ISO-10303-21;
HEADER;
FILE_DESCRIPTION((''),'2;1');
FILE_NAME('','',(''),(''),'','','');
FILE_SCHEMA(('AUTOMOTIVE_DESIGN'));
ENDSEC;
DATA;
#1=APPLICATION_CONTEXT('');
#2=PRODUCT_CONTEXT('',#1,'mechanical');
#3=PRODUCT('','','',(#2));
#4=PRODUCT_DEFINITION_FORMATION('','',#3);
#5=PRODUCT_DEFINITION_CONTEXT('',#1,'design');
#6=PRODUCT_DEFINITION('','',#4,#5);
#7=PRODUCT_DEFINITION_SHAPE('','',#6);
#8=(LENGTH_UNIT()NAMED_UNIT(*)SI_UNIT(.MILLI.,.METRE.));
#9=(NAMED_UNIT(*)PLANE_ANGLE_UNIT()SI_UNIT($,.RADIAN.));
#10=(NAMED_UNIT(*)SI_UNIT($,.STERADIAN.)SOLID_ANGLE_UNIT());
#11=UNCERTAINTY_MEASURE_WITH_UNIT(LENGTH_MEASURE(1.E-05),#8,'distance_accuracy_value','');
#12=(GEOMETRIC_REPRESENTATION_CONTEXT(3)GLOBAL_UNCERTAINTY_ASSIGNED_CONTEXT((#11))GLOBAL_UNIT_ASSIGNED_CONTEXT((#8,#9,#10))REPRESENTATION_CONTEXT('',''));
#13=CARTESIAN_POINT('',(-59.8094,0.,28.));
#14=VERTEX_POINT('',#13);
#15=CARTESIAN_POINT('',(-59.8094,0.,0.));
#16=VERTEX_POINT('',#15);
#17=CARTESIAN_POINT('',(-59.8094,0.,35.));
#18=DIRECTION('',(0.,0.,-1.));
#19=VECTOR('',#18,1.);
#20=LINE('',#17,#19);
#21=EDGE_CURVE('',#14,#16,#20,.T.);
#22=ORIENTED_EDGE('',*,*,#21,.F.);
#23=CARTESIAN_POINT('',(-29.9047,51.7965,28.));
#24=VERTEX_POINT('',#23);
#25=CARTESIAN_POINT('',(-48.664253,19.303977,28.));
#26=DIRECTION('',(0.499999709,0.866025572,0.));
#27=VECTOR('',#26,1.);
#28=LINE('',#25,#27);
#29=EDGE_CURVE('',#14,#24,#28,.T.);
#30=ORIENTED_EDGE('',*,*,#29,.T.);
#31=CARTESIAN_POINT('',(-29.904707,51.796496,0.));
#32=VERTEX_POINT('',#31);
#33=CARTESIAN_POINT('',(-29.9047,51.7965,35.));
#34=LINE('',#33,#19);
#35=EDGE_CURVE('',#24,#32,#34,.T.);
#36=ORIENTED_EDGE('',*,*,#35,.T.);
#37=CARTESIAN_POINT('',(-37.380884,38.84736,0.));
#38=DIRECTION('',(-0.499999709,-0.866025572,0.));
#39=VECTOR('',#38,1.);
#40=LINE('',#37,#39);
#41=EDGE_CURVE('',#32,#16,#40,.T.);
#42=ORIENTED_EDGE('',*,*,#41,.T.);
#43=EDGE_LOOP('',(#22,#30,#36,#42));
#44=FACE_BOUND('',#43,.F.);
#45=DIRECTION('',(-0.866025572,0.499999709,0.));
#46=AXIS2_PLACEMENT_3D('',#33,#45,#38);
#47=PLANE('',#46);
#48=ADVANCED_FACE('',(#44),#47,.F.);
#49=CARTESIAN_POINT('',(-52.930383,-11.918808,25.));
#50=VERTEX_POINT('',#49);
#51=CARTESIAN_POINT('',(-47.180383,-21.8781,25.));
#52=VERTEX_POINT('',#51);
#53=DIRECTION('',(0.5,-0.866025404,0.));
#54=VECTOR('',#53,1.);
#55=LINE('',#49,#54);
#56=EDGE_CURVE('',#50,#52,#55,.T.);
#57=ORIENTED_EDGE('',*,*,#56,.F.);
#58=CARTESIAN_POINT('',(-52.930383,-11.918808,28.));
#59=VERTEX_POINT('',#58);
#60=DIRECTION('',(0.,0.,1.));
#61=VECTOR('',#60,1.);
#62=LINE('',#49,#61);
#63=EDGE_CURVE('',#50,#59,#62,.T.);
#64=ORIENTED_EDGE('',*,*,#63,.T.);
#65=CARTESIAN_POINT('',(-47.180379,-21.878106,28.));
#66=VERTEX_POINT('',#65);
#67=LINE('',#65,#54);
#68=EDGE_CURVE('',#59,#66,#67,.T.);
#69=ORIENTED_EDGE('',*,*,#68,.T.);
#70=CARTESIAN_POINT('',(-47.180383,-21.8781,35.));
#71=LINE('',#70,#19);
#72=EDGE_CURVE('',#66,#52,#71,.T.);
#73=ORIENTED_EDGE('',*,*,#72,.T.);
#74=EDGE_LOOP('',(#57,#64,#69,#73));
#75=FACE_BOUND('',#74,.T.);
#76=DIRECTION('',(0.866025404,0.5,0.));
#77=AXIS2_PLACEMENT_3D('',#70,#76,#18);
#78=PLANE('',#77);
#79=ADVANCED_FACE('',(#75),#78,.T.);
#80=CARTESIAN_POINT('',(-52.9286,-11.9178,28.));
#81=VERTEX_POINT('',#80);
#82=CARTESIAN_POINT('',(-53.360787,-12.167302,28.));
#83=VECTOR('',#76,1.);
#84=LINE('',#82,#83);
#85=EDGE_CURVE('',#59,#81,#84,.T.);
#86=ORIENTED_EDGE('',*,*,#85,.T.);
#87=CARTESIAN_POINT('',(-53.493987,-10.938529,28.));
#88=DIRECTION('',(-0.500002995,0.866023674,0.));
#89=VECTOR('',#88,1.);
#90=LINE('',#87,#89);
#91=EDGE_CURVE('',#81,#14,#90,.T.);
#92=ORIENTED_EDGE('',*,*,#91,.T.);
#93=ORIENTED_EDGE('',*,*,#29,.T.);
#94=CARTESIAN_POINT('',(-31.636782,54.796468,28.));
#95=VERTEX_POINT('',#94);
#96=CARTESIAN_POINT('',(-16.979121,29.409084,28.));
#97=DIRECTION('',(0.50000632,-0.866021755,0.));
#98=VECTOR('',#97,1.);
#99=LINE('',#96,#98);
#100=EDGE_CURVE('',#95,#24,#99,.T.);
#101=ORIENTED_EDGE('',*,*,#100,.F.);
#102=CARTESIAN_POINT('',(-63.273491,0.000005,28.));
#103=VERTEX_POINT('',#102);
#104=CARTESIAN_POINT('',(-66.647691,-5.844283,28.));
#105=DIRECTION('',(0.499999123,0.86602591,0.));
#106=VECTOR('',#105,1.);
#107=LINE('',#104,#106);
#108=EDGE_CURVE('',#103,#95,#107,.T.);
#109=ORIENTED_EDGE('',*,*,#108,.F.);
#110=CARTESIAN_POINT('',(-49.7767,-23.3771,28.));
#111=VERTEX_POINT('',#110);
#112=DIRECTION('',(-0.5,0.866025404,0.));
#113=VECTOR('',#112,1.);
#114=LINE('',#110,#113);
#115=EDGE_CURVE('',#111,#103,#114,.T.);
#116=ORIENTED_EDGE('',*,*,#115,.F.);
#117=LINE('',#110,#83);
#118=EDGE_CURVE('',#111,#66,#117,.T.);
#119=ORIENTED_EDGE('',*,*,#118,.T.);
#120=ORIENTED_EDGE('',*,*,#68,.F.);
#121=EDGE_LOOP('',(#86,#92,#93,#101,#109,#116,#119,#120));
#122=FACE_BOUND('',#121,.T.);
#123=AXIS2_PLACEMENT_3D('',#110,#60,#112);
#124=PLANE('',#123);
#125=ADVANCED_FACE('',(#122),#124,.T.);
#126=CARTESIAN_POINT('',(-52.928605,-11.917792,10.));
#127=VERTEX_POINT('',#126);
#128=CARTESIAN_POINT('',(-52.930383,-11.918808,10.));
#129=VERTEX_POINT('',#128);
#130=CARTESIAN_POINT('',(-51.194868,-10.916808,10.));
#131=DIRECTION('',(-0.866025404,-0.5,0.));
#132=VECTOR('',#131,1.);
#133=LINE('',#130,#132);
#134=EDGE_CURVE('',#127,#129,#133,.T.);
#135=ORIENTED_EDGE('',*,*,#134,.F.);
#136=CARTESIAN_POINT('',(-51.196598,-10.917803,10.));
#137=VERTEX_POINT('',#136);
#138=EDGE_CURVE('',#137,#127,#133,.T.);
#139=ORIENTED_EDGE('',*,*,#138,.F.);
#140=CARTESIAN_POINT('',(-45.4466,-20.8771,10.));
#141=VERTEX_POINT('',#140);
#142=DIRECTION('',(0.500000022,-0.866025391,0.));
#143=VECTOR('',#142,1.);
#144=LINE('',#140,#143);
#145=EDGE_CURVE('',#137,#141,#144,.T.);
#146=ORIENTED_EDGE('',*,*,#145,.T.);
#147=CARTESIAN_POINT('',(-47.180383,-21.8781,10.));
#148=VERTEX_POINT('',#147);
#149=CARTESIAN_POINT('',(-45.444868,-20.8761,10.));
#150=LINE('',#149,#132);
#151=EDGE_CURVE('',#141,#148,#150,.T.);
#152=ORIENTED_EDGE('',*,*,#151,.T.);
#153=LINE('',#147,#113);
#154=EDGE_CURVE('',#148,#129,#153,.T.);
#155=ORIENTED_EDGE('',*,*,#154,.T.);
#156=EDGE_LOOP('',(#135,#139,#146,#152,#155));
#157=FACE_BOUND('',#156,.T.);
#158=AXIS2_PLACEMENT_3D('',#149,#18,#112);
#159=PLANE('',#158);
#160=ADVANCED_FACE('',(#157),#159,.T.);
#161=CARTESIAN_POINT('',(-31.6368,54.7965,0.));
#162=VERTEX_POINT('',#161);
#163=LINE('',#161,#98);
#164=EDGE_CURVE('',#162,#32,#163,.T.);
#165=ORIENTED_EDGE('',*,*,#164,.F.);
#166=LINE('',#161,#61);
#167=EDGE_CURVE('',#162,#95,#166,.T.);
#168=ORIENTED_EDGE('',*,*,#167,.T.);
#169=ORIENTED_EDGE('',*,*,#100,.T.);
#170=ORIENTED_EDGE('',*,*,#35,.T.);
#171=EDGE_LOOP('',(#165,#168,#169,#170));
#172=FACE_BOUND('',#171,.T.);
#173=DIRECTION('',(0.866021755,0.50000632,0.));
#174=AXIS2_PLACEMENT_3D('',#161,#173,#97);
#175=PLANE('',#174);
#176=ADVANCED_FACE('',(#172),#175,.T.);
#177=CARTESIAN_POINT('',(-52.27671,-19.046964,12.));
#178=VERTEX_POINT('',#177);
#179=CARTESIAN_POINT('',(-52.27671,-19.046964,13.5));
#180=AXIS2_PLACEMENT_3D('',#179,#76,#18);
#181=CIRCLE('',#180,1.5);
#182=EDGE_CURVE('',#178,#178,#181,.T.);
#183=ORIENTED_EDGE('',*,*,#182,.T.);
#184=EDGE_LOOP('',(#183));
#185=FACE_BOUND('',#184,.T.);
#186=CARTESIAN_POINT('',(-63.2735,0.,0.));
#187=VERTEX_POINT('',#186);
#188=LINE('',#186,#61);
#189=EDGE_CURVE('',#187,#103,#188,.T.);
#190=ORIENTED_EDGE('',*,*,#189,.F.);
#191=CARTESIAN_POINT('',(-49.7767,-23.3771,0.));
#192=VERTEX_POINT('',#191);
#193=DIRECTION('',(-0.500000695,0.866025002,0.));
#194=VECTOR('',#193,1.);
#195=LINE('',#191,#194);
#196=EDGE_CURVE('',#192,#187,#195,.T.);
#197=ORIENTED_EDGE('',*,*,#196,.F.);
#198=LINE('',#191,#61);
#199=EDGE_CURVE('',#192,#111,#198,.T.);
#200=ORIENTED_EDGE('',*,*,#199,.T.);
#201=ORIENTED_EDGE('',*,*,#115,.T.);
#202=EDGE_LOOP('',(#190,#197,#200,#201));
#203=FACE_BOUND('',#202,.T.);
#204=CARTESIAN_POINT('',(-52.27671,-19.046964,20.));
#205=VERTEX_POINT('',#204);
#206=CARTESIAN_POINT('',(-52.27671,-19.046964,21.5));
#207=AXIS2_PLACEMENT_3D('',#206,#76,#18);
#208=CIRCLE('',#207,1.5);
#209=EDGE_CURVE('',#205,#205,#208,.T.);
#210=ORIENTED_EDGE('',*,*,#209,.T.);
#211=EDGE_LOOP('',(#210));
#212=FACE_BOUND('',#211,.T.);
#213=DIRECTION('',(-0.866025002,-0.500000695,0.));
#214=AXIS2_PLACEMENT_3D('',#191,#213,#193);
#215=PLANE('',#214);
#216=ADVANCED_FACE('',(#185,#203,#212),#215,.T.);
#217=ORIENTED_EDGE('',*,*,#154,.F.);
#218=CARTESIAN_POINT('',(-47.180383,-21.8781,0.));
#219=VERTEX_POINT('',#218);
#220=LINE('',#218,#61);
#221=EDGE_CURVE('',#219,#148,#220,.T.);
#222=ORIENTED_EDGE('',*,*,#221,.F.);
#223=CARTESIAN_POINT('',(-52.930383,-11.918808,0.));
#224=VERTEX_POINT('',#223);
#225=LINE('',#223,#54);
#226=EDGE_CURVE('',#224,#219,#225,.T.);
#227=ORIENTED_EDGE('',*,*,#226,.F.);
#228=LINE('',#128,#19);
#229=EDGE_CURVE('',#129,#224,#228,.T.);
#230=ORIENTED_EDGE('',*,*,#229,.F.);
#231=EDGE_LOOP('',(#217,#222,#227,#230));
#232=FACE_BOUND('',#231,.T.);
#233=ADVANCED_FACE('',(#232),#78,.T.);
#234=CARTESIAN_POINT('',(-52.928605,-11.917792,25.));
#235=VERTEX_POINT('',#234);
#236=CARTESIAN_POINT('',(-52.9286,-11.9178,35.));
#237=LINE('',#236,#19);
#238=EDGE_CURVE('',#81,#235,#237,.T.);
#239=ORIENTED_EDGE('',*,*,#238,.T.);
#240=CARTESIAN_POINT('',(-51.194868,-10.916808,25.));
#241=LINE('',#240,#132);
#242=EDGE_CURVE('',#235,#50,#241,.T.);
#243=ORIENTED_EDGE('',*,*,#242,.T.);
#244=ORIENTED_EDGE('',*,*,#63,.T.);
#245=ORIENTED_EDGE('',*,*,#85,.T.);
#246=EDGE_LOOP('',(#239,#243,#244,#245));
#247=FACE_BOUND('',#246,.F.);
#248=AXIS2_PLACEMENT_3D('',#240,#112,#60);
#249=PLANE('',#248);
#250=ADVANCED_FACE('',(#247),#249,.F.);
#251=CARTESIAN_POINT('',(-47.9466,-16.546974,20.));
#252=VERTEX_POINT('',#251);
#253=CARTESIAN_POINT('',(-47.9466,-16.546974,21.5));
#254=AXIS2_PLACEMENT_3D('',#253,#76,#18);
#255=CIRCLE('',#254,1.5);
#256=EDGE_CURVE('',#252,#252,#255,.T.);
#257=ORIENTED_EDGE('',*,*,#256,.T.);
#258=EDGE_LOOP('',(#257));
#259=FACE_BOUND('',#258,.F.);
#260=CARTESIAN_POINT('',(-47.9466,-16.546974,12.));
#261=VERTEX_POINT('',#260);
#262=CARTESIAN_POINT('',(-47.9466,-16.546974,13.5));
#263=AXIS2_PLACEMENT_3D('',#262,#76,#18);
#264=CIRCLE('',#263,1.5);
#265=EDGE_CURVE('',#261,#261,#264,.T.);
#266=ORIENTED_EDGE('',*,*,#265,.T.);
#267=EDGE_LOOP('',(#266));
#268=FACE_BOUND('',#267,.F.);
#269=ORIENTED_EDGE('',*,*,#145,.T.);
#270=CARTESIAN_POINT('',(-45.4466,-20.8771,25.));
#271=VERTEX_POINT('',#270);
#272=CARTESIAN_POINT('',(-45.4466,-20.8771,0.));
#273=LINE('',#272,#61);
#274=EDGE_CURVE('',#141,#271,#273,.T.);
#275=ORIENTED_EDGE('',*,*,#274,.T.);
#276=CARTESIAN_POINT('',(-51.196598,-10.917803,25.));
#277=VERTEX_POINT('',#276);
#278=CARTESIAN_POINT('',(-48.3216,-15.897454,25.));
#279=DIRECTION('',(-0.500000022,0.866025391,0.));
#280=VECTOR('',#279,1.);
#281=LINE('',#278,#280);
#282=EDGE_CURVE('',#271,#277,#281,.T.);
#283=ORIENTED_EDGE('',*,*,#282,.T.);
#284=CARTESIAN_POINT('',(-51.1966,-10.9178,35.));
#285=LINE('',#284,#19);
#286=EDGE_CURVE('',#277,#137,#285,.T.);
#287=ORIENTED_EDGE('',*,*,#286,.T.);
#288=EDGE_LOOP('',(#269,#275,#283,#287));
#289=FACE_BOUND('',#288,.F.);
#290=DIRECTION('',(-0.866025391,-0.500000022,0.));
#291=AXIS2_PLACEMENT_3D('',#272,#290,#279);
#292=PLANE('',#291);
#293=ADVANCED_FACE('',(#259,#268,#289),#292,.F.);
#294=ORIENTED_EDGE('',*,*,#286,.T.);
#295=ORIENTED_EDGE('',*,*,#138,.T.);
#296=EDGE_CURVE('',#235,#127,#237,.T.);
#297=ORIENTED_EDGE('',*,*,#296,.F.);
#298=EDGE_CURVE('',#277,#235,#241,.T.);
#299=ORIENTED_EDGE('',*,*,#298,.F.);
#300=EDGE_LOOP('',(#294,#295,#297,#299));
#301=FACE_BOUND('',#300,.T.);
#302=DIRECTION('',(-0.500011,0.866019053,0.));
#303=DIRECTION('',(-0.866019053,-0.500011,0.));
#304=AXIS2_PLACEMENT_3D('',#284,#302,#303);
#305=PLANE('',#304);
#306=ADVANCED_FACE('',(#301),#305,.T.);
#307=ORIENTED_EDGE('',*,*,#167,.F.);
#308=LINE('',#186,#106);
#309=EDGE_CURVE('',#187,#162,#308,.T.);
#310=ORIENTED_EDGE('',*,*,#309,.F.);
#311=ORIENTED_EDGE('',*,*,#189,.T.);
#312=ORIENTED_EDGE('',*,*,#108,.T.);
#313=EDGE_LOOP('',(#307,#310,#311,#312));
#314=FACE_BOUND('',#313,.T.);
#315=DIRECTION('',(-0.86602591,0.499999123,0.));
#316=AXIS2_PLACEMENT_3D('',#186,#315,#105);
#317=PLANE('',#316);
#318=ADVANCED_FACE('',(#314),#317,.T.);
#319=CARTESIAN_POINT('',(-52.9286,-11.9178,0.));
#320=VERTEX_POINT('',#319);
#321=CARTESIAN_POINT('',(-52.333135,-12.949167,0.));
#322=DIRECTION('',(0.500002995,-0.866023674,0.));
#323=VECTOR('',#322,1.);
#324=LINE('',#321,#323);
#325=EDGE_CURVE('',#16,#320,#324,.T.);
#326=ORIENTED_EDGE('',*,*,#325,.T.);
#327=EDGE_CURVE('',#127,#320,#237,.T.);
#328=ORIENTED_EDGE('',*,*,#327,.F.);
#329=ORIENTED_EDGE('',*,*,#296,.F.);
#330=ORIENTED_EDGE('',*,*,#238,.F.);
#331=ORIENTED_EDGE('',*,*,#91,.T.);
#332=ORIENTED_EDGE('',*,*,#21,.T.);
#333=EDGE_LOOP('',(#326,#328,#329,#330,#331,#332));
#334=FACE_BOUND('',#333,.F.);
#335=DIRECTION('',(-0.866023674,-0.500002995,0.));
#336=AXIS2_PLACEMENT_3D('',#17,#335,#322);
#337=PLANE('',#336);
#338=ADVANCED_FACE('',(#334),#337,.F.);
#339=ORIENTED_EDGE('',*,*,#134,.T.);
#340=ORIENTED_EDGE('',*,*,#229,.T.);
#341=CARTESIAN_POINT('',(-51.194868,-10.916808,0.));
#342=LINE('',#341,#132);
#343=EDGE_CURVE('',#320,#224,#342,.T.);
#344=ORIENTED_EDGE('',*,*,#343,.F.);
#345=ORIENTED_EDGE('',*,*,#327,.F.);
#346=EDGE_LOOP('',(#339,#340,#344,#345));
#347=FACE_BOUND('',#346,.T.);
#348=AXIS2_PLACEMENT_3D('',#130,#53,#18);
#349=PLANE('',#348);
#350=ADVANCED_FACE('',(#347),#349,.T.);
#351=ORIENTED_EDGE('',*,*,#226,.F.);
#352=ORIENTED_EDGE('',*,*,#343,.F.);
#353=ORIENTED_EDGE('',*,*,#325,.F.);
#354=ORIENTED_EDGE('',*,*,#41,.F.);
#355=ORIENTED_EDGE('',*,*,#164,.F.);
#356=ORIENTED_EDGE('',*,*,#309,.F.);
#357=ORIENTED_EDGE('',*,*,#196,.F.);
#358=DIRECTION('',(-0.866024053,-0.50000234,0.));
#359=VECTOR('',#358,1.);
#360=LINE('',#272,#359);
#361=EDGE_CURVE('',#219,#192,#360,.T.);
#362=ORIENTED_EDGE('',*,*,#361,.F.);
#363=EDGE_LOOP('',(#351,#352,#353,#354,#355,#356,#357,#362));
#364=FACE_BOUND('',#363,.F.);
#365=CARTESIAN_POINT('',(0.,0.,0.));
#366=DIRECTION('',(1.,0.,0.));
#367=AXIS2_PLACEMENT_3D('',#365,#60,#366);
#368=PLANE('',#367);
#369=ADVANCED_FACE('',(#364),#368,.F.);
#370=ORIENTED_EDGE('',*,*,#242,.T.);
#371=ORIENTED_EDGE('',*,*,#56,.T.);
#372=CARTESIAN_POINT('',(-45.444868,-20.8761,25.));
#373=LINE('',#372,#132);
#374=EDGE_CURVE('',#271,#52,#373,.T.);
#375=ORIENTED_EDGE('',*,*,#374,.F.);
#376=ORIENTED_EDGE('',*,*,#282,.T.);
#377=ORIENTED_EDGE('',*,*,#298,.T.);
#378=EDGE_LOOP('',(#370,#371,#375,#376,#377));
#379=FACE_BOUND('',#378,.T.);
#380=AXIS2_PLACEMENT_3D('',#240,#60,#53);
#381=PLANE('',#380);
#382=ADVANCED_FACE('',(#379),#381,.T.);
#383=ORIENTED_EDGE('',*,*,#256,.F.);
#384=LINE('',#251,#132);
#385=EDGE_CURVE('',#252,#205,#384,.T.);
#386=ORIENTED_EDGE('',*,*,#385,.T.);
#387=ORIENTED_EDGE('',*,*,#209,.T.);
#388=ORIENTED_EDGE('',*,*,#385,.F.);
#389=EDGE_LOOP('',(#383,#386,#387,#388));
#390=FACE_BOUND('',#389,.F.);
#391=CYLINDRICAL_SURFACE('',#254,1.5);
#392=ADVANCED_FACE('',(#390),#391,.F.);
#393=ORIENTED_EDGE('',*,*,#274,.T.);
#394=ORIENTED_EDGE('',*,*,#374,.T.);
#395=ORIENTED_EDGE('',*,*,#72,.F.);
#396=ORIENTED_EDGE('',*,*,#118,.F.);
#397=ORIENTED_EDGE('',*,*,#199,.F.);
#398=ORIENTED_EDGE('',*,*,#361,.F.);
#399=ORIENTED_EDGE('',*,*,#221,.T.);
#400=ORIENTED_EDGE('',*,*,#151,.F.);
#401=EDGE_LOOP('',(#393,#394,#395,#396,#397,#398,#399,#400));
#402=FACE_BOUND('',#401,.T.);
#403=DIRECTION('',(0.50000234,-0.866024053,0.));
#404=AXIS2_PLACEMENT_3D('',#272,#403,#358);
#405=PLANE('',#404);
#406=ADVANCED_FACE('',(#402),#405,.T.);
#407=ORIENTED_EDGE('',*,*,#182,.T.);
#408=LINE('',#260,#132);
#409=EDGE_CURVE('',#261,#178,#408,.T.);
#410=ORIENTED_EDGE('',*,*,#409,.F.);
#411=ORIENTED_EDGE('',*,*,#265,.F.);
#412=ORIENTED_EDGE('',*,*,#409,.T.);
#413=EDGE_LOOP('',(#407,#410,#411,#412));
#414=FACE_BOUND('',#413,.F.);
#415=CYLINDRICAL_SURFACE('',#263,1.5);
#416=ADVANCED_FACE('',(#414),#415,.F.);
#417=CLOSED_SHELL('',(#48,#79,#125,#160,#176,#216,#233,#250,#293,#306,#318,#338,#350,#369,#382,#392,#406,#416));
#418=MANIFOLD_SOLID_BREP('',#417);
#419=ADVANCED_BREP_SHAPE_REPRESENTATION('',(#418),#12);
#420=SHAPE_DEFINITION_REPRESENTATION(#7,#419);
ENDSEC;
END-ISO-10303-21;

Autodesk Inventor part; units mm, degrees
ref_plane "YZ Plane" through (0, 0, 0) normal (1, 0, 0) x (0, 1, 0)
ref_plane "XZ Plane" through (0, 0, 0) normal (0, 1, 0) x (-1, 0, 0)
ref_plane "XY Plane" through (0, 0, 0) normal (0, 0, 1) x (1, 0, 0)
sketch "Sketch1" plane through (0, 0, 0) normal (0, 0, 1) x (1, 0, 0)
  line L0 (57.5, 0) -> (28.75, -49.7965) construction
  line L1 (28.75, -49.7965) -> (-28.75, -49.7965) construction
  line L2 (-28.75, -49.7965) -> (-57.5, 0) construction
  line L3 (-57.5, 0) -> (-28.75, 49.7965) construction
  line L4 (-28.75, 49.7965) -> (28.75, 49.7965) construction
  line L5 (28.75, 49.7965) -> (57.5, 0) construction
  line L6 (-31.6368, 54.7965) -> (-63.2735, 0) construction
  line L7 (-63.2735, 0) -> (-31.6368, -54.7965) construction
  line L8 (-31.6368, -54.7965) -> (31.6368, -54.7965) construction
  line L9 (31.6368, -54.7965) -> (63.2735, 0) construction
  line L10 (63.2735, 0) -> (31.6368, 54.7965) construction
  line L11 (31.6368, 54.7965) -> (-31.6368, 54.7965) construction
  line L12 (-47.9466, -16.547) -> (-52.2767, -19.047) construction
  line L13 (-45.4466, -20.8771) -> (-49.7767, -23.3771)
  line L14 (-45.4466, -20.8771) -> (-57.5, 0)
  line L15 (-49.7767, -23.3771) -> (-63.2735, 0)
  line L16 (-63.2735, 0) -> (-31.6368, 54.7965)
  line L17 (-31.6368, 54.7965) -> (-28.75, 49.7965)
  line L18 (-28.75, 49.7965) -> (-57.5, 0)
  point P0 (0, 0)
  point P1 (0, 0)
  dimension "d0" = 115
  dimension "d1" = 5
  dimension "d2" = 19.1068
  dimension "d3" = 5
extrude "Extrusion1" add sketch "Sketch1" along normal blind 35
sketch "Sketch2" plane through (-57.5, 0, 35) normal (0.8660254, 0.5, 0) x (0, 0, -1)
  circle A0 centre (17.5, -19.1068) radius 1.5 construction
  line L0 (35, -24.1068) -> (0, -24.1068) projected
  line L1 (21.5, -19.1068) -> (13.5, -19.1068) construction
  circle A1 centre (21.5, -19.1068) radius 1.5
  circle A2 centre (13.5, -19.1068) radius 1.5
  point P0 (35, -28.75)
  point P1 (17.5, -24.1068)
  dimension "d6" = 3
  dimension "d7" = 5
  dimension "d14" = 8
  dimension "d15" = 3
  dimension "d16" = 3
extrude "Extrusion2" cut sketch "Sketch2" against normal through all
sketch "Sketch3" plane through (0, 0, 35) normal (0, 0, 1) x (1, 0, 0)
  line L0 (-45.4466, -20.8771) -> (-57.5, 0) construction
  line L1 (-57.5, 0) -> (-28.75, 49.7965) construction
  line L2 (-30.4821, 50.7965) -> (-59.8094, 0) construction
  line L3 (-59.8094, 0) -> (-47.1786, -21.8771) construction
  line L4 (-51.5267, -20.346) -> (-53.0267, -17.7479) construction
  line L5 (-48.6966, -15.2479) -> (-47.1966, -17.846) construction
  line L6 (-51.1966, -10.9178) -> (-52.9286, -11.9178)
  line L7 (-51.1966, -10.9178) -> (-57.5, 0)
  line L8 (-57.5, 0) -> (-28.75, 49.7965)
  line L9 (-28.75, 49.7965) -> (-29.9047, 51.7965)
  line L10 (-28.75, 49.7965) -> (-31.6368, 54.7965) projected
  line L11 (-29.9047, 51.7965) -> (-59.8094, 0)
  line L12 (-59.8094, 0) -> (-52.9286, -11.9178)
  line L13 (-49.7767, -23.3771) -> (-45.4466, -20.8771) projected
  point P0 (0, 0)
  dimension "d10" = 2
  dimension "d17" = 11.5
extrude "Extrusion3" cut sketch "Sketch3" against normal through all
sketch "Sketch4" plane through (-45.4466, -20.8771, 35) normal (0.8660254, 0.5, 0) x (0, 0, -1)
  line L0 (35, 0) -> (0, 0) construction
  line L1 (35, 11.5) -> (0, 11.5) construction
  line L2 (10, 0) -> (25, 0)
  line L3 (25, 0) -> (25, 11.5)
  line L4 (25, 11.5) -> (10, 11.5)
  line L5 (10, 11.5) -> (10, 0)
  circle A0 centre (13.5, 5) radius 1.5 construction
  line L6 (13.5, 5) -> (21.5, 5) construction
  circle A1 centre (21.5, 5) radius 1.5 construction
  line L7 (10, 11.5) -> (0, 11.5)
  line L8 (0, 11.5) -> (0, 0)
  line L9 (0, 0) -> (10, 0)
  line L10 (10, 0) -> (10, 11.5)
  line L11 (35, 11.5) -> (35, 0) projected
  line L12 (25, 11.5) -> (35, 11.5)
  line L13 (35, 11.5) -> (35, 0)
  line L14 (35, 0) -> (25, 0)
  line L15 (25, 0) -> (25, 11.5)
  point P0 (35, -4.6432)
  point P1 (17.5, 5)
  point P2 (17.5, 11.5)
  point P3 (17.5, 11.5)
  dimension "d18" = 15
extrude "Extrusion4" cut sketch "Sketch4" against normal blind 2 contours L9 L8 L7 L5 | L3 L12 L11 L14
sketch "Sketch5" plane through (-49.7767, -23.3771, 0) normal (-0.8660254, -0.5, 0) x (0, 0, 1)
  line L0 (0, 0) -> (35, 0) projected
  line L1 (0, 58.6303) -> (35, 58.6303) projected
  line L2 (35, 0) -> (28, 0)
  line L3 (28, 0) -> (28, 58.6303)
  line L4 (28, 58.6303) -> (35, 58.6303)
  line L5 (35, 58.6303) -> (35, 0)
  point P0 (0, -4.6432)
  dimension "d21" = 7
extrude "Extrusion5" cut sketch "Sketch5" against normal through all
properties part number "TA09" material "ABS Plastic"
